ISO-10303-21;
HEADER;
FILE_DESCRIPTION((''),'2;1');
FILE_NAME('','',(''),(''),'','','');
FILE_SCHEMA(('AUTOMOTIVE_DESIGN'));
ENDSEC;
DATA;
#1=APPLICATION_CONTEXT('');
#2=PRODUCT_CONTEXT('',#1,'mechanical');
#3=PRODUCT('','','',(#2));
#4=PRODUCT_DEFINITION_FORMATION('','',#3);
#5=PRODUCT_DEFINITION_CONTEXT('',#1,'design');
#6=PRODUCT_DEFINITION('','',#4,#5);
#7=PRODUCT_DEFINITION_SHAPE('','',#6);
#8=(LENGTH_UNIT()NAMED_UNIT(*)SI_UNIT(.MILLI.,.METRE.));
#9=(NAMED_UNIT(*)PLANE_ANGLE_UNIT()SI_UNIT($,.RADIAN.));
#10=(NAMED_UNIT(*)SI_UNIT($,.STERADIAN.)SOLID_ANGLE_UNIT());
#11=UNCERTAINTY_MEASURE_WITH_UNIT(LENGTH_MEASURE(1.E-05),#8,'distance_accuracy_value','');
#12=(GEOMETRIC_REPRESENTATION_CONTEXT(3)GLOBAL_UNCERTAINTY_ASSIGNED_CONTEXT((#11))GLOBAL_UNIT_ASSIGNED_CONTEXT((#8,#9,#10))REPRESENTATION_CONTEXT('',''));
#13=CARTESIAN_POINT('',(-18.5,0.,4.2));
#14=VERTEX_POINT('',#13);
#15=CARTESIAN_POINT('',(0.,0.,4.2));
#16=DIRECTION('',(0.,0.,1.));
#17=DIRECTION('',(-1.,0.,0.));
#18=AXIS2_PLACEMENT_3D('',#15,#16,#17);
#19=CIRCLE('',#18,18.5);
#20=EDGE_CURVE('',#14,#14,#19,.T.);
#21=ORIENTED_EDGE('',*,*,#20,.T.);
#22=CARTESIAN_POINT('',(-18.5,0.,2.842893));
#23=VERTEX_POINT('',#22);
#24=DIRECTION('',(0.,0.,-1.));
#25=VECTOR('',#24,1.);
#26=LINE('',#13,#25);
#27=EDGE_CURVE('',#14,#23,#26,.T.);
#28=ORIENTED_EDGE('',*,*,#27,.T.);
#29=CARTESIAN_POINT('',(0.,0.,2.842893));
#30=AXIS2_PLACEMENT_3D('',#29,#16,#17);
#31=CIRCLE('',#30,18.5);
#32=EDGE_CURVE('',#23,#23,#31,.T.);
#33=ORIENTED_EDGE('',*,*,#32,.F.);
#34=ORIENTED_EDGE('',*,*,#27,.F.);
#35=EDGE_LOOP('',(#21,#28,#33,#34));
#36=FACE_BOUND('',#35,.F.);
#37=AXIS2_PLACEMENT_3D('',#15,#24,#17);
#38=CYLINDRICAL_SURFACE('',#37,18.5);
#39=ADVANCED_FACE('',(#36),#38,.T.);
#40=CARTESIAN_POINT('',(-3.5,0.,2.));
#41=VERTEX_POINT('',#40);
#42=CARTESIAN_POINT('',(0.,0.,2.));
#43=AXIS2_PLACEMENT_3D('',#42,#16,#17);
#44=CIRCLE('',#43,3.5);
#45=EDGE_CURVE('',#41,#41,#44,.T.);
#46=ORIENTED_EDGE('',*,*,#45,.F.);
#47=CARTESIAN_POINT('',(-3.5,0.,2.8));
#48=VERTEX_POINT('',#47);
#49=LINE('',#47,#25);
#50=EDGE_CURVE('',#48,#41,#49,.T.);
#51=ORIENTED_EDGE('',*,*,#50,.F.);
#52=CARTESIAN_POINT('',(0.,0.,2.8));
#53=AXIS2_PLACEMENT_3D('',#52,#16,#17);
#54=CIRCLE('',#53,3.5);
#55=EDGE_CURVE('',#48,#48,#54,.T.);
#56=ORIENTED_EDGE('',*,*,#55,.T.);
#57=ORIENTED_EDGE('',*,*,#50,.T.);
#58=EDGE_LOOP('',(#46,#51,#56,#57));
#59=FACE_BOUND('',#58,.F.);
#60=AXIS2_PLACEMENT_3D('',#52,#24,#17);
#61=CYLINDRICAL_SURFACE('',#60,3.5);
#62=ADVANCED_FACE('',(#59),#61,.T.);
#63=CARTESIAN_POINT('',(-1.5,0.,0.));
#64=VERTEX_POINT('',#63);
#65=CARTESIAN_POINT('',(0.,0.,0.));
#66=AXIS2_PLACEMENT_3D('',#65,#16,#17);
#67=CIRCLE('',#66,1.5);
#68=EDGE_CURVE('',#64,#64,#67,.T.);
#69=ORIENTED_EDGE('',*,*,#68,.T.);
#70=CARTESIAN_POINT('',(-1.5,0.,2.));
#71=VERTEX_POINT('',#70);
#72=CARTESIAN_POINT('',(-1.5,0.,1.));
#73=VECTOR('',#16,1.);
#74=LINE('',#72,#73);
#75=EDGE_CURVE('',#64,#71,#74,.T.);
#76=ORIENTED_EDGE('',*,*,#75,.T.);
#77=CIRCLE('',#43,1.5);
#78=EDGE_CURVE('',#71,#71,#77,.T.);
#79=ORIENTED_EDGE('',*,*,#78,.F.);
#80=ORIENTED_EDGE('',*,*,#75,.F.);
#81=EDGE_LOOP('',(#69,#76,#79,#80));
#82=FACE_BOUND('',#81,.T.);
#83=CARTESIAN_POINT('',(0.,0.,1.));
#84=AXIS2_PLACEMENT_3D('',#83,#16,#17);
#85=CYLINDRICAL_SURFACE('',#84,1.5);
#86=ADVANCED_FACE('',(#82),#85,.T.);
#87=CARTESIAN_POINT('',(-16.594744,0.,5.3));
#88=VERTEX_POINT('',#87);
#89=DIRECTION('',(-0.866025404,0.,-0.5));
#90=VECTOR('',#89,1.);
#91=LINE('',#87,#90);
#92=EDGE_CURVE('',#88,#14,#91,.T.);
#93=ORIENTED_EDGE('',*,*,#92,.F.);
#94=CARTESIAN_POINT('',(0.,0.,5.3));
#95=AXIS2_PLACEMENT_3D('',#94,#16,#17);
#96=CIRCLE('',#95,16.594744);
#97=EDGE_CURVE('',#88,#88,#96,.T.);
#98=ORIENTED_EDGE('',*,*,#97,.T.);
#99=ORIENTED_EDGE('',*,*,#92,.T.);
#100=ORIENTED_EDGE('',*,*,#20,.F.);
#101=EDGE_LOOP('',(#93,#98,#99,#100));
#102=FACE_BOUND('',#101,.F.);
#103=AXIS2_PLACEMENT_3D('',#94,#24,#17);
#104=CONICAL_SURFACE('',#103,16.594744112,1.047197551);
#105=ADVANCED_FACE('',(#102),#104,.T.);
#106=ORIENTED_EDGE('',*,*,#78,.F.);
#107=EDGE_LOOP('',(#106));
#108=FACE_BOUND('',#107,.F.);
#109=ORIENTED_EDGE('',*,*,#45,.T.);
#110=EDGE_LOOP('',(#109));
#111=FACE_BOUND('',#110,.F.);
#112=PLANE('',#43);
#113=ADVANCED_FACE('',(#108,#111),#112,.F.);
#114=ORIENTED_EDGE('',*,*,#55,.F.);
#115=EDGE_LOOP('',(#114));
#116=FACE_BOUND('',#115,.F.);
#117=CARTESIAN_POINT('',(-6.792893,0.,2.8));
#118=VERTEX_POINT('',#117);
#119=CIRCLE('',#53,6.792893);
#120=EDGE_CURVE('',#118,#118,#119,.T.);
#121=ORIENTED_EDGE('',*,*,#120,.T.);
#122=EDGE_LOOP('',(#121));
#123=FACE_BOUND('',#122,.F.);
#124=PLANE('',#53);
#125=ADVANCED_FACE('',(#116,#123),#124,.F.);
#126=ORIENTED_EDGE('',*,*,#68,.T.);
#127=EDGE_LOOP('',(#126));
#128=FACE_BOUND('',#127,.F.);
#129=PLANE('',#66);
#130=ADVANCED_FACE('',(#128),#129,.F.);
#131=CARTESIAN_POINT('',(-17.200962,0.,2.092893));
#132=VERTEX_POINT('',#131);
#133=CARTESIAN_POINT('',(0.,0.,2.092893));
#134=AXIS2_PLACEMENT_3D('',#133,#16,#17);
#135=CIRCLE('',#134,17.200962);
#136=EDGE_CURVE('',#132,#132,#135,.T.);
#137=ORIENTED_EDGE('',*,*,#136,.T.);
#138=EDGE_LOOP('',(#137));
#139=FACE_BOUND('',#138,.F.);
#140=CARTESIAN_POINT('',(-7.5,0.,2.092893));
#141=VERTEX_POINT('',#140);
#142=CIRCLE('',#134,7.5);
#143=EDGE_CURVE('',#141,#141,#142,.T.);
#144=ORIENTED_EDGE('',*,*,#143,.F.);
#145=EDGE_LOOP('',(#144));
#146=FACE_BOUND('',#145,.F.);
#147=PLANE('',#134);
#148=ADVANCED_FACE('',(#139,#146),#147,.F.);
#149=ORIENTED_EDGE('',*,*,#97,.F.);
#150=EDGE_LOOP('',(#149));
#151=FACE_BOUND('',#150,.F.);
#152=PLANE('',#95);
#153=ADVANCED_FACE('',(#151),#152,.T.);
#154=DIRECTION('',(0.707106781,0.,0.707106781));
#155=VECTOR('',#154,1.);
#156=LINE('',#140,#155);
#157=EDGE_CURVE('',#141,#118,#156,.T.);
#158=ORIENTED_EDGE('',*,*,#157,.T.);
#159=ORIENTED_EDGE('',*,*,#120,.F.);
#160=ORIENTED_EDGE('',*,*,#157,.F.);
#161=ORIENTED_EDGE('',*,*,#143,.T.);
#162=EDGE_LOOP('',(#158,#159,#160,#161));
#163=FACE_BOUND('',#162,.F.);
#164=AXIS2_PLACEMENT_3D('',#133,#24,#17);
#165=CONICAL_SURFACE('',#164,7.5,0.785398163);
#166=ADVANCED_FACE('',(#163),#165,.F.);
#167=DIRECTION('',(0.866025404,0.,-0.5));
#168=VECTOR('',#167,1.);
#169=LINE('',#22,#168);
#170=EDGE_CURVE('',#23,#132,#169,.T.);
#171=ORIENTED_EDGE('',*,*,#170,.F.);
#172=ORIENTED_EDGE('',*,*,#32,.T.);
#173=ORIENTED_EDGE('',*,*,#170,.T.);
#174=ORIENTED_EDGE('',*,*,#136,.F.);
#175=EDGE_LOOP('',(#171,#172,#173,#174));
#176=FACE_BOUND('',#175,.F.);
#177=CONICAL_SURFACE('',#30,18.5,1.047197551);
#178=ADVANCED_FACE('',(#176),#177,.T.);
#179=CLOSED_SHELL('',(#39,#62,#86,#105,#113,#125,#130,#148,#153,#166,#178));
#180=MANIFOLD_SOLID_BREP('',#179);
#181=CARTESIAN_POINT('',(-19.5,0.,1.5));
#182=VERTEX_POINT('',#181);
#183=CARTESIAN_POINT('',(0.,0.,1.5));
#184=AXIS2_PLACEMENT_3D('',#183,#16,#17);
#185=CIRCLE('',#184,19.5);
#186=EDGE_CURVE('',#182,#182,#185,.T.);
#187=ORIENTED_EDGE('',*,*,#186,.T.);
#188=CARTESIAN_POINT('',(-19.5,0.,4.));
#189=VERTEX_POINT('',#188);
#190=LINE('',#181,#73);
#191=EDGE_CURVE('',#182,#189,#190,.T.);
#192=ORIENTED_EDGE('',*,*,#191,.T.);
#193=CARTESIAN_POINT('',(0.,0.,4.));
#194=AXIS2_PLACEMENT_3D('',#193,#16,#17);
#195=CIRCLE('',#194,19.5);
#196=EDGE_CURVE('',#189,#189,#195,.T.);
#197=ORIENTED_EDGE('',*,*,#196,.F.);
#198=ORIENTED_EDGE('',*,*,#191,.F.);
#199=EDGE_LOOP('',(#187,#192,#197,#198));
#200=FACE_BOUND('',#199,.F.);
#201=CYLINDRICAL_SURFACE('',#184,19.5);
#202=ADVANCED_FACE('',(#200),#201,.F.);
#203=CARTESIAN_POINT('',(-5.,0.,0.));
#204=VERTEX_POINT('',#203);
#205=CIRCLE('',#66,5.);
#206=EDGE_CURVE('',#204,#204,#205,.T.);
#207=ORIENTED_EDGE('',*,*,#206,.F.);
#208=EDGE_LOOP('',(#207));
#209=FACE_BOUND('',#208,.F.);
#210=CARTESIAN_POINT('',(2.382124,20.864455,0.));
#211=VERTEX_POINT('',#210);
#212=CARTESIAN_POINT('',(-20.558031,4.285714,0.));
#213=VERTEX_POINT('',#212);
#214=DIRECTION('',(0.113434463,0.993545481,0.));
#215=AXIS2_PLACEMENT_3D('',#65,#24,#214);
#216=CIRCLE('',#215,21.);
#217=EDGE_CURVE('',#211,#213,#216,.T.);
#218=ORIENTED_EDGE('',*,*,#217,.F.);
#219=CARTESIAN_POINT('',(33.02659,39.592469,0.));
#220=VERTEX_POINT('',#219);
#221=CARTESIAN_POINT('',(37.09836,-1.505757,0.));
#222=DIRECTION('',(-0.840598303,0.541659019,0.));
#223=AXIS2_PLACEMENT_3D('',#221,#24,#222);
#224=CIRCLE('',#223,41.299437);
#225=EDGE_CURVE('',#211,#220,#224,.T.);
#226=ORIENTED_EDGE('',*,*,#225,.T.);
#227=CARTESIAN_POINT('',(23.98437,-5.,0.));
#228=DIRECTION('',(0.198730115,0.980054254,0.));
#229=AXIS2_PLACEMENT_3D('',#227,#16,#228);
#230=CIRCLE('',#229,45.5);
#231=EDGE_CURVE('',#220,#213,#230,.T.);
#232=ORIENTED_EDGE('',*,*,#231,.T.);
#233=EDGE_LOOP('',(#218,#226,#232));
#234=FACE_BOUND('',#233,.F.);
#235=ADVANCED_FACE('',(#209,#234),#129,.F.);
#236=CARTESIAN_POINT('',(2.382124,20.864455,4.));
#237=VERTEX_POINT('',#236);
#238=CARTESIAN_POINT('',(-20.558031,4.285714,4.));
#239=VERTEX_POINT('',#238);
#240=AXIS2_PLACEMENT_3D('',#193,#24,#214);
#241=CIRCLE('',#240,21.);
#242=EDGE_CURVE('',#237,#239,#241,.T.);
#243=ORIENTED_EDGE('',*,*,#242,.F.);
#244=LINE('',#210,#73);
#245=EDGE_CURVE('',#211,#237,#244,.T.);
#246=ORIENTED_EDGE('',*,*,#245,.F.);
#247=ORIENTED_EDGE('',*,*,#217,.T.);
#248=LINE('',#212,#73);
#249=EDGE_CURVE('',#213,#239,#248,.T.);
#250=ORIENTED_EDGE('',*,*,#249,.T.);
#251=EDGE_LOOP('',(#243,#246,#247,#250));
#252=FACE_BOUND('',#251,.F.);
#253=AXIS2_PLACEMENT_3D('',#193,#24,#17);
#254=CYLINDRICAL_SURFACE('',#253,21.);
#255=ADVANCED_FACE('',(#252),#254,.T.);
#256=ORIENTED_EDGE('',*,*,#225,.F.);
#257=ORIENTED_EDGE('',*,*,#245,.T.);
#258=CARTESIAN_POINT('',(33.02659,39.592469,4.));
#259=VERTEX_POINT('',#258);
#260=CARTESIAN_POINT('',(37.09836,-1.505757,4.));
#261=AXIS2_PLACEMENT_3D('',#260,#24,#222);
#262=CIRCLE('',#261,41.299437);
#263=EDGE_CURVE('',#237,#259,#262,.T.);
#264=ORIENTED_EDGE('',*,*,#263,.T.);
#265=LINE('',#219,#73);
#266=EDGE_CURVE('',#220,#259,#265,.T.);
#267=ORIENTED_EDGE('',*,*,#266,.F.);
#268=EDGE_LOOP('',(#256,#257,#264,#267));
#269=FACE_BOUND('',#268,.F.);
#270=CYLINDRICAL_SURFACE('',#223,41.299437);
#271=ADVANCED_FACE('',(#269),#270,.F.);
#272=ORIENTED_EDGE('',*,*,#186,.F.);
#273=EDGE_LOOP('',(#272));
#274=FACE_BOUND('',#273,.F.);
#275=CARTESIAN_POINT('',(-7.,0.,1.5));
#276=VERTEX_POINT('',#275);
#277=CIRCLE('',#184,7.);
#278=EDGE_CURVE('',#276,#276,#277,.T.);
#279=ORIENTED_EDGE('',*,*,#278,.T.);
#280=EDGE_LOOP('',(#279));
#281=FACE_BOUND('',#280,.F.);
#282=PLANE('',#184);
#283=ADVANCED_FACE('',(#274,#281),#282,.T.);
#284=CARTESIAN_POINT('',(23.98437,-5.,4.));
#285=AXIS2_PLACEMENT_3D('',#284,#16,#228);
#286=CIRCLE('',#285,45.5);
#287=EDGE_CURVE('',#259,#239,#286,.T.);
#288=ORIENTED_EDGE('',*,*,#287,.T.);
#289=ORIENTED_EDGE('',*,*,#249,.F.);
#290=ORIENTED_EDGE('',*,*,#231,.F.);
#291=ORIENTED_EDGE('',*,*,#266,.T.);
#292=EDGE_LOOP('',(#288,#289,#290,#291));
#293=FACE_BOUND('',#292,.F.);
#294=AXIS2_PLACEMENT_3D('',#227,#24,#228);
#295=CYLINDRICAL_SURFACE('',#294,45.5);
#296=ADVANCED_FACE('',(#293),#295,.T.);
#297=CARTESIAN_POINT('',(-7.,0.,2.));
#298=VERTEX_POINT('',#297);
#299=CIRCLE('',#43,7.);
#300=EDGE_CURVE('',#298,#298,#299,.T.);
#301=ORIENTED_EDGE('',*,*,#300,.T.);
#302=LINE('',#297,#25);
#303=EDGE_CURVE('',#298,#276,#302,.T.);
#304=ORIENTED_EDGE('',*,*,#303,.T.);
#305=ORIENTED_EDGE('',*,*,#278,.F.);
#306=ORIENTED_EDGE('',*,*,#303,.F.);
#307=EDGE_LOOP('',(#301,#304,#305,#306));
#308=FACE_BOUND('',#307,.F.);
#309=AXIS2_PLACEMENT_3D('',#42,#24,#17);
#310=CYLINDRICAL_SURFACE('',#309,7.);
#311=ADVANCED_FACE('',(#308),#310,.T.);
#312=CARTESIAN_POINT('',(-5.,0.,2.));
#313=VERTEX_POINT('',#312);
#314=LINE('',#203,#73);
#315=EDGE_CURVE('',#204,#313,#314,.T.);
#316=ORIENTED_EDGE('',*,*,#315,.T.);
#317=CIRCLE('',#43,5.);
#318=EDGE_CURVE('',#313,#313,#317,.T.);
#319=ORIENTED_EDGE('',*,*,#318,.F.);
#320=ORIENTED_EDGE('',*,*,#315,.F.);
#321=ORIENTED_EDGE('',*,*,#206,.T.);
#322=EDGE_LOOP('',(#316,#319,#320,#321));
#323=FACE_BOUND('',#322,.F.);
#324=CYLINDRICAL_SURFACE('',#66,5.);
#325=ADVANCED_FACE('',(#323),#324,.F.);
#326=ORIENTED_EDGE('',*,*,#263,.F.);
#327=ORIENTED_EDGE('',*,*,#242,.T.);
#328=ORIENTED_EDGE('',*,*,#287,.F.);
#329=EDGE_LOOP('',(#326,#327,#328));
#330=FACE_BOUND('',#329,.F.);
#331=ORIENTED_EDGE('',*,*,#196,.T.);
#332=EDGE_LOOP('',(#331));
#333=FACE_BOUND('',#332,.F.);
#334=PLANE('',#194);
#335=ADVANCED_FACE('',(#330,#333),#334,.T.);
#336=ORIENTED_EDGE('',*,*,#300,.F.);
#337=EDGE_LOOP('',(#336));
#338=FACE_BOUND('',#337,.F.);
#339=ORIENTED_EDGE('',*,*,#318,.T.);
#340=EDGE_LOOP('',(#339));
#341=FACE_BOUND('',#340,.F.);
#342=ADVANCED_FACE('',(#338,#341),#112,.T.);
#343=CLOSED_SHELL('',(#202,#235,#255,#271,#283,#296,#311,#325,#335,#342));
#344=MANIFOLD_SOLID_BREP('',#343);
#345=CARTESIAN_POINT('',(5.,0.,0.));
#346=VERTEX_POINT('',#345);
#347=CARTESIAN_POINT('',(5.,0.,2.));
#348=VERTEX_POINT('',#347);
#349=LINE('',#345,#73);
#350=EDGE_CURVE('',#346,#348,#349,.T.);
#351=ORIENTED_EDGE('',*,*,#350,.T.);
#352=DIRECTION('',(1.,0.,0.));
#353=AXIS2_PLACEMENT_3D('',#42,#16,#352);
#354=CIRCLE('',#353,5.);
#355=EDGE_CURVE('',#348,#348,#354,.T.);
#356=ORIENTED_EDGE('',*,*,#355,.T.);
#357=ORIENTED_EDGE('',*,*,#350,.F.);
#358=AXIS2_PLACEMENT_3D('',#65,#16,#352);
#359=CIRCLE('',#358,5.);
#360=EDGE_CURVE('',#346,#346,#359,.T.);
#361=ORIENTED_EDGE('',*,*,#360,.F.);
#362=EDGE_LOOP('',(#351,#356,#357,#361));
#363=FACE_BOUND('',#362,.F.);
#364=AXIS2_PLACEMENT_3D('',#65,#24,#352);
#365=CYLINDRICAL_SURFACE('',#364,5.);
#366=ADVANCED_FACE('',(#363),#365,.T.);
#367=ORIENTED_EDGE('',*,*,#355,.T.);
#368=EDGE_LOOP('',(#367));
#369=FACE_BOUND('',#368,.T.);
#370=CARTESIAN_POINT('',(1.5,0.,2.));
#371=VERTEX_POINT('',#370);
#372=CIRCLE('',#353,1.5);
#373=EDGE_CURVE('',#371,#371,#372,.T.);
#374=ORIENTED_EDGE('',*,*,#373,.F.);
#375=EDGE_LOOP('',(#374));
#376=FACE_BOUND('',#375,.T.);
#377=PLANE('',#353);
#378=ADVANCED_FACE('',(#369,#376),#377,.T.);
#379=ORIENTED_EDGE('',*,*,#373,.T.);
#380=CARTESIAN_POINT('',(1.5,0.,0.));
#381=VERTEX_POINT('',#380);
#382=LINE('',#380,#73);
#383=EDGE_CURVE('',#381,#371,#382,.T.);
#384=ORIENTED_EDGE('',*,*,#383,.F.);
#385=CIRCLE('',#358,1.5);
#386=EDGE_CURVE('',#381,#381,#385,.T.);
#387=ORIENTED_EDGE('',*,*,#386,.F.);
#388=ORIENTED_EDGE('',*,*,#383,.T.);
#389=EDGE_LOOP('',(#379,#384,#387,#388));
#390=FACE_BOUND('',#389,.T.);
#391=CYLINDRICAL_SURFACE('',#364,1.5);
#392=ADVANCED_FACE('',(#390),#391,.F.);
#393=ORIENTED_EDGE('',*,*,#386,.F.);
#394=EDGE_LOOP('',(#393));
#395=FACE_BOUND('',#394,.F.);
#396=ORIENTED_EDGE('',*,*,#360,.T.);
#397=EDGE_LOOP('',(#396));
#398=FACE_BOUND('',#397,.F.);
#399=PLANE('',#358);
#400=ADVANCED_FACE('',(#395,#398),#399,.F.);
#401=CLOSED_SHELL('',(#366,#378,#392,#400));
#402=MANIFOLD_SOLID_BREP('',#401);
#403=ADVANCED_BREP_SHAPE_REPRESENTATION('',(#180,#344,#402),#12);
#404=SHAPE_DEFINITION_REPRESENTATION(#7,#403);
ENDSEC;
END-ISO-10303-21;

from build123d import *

# Parameters (mm, degrees)
F0_R     = 5
F0_R_2   = 1.5
F1_DEPTH = 2
F4_W     = 1.5
F4_H     = 2
F7_DEPTH = 4


# Not quite as in the source:
# - a feature of the source that left no trace in its solid (it failed there, or was rolled back) is left out


with BuildPart() as f1:
    # F0 (on Top) → F1 (new body)
    with BuildSketch(Plane.XY):
        Circle(F0_R)
        Circle(F0_R_2, mode=Mode.SUBTRACT)
    extrude(amount=F1_DEPTH)


with BuildPart() as f3:
    # F2 (on Front) → F3 (revolve)
    with BuildSketch(Plane.XZ):
        Polygon((-21, 0), (-5, 0), (-5, 2), (-7, 2), (-7, 1.5), (-19.5, 1.5), (-19.5, 4), (-21, 4), align=None)
    revolve(axis=Axis((0, 0, 2.9167793691), (0, 0, 1)))

    # F6 (on Top) → F7 (join, through all)
    with BuildSketch(Plane.XY):
        with BuildLine():
            ThreePointArc((2.3821237217, 20.8644550989), (15.5620656061, 33.7338722927), (33.0265901225, 39.5924685753))
            ThreePointArc((33.0265901225, 39.5924685753), (-1.0497554808, 32.9939806535), (-20.5580313112, 4.2857144807))
            ThreePointArc((-20.5580313112, 4.2857144807), (-12.3005920304, 17.0204417012), (2.3821237217, 20.8644550989))
        make_face()
    extrude(amount=F7_DEPTH)


with BuildPart() as f5:
    # F4 (on Front) → F5 (revolve)
    with BuildSketch(Plane.XZ):
        Polygon((0, 2), (0, 5.3), (-16.5947441117, 5.3), (-18.5, 4.2), (-18.5, 2.8428932188), (-17.2009618943, 2.0928932188), (-7.5, 2.0928932188), (-6.7928932188, 2.8), (-3.5, 2.8), (-3.5, 2), (-1.5, 2), align=None)
        with Locations((-0.75, 1)):
            Rectangle(F4_W, F4_H)
    revolve(axis=Axis((0, 0, 2.65), (0, 0, 1)))


solid = Compound([f1.part, f3.part, f5.part])
